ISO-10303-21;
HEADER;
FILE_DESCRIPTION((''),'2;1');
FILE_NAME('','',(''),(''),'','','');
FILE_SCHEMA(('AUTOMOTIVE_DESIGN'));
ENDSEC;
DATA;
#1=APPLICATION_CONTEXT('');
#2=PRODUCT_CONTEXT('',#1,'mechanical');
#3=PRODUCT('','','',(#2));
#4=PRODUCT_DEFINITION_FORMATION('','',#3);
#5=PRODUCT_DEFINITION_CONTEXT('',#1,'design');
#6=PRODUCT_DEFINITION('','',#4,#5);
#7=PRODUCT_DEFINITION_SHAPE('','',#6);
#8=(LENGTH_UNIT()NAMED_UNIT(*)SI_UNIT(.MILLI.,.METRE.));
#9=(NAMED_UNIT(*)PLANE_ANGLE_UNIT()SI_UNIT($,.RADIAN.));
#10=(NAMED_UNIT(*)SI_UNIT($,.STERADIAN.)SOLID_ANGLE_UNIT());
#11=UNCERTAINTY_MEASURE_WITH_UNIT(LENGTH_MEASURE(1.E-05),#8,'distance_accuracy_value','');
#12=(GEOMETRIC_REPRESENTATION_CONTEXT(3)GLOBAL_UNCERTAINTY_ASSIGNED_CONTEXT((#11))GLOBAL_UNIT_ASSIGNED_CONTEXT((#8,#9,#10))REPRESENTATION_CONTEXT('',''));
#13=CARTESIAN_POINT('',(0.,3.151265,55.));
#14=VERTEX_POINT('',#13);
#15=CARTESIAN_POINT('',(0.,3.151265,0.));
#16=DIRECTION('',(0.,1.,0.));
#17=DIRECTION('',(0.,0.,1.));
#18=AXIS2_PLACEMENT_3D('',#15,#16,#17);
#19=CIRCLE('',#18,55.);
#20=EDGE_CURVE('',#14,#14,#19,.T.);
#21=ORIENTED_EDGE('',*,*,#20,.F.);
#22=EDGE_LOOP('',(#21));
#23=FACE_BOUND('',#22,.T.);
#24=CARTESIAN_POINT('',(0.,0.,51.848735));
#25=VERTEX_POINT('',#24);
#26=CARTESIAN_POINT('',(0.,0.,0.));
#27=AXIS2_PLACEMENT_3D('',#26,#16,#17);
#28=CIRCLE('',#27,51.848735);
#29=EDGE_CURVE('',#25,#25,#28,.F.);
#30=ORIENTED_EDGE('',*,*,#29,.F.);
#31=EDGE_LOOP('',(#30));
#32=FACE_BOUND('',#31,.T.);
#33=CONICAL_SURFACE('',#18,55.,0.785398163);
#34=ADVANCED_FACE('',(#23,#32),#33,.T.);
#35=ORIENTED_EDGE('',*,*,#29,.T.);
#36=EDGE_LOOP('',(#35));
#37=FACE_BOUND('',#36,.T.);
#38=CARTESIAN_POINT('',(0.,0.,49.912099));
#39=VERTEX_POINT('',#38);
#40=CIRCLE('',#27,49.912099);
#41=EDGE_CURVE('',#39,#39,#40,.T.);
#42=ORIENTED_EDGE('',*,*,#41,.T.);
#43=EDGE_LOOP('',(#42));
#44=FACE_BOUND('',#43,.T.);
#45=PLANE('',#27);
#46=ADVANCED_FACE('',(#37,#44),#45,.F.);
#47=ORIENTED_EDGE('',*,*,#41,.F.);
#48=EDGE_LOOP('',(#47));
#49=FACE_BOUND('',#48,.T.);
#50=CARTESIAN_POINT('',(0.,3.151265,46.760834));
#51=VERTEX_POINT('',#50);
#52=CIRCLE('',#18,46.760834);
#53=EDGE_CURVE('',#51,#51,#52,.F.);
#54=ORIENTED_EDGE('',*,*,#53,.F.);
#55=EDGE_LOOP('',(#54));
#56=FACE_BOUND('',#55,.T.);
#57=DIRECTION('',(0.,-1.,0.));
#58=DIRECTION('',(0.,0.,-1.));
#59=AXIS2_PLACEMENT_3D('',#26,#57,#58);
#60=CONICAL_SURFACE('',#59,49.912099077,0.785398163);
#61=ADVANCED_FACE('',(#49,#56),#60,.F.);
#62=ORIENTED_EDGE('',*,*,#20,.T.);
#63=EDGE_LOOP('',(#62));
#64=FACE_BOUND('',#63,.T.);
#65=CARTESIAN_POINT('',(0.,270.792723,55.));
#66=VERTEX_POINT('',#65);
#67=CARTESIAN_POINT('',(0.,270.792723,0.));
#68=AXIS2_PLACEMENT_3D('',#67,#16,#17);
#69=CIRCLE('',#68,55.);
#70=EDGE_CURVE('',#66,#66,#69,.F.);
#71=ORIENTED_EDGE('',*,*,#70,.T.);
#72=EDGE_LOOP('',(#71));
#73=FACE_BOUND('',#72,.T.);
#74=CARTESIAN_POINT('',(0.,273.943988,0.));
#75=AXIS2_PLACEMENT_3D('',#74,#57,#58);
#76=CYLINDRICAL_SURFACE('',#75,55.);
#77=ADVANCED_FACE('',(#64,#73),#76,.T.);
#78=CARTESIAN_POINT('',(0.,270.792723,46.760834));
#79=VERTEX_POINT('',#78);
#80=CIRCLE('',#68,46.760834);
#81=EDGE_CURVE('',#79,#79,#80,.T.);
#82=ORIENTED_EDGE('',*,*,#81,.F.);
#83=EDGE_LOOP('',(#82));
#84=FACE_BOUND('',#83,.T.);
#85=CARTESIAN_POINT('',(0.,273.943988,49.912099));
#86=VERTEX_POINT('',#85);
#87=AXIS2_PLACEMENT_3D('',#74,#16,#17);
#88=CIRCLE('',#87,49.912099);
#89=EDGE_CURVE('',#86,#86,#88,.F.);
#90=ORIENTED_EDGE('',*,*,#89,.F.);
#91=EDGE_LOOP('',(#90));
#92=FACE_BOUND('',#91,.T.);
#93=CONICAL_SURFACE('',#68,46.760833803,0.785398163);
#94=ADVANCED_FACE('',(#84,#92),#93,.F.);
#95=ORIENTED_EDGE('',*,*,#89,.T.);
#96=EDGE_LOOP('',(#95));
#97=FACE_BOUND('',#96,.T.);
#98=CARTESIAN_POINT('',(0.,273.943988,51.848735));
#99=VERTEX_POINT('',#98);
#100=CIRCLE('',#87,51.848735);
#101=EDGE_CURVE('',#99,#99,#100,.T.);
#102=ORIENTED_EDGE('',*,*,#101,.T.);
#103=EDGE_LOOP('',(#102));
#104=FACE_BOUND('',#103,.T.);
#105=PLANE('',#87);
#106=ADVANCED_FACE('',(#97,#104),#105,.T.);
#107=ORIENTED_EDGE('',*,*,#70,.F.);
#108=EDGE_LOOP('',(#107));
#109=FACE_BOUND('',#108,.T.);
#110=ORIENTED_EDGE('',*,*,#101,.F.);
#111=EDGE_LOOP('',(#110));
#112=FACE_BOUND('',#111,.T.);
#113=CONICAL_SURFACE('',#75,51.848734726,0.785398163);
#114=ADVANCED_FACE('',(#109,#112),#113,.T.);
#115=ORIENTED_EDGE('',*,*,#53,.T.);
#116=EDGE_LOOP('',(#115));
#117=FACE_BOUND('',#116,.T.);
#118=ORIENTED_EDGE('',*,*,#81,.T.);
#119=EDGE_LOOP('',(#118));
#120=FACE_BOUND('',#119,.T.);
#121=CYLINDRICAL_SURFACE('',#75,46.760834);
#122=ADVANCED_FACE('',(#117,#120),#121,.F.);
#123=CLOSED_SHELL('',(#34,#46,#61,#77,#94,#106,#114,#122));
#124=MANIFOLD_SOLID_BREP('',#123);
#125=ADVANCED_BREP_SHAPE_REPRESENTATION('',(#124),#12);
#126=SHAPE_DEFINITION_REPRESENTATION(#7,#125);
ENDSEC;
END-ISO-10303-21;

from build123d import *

# Parameters (mm, degrees)
SKETCH1_R           = 55
BOSS_EXTRUDE1_DEPTH = 273.943988282
SKETCH2_R           = 46.760833803
CUT_EXTRUDE1_DEPTH  = 285.772380536
CHAMFER1_SIZE       = 3.151265274


with BuildPart() as part:
    # Sketch1 → Boss-Extrude1 (new body)
    with BuildSketch(Plane(origin=(0, 0, 0), x_dir=(1, 0, 0), z_dir=(0, 1, 0))):
        Circle(SKETCH1_R)
    extrude(amount=BOSS_EXTRUDE1_DEPTH)

    # Sketch2 → Cut-Extrude1 (cut, through all)
    with BuildSketch(Plane(origin=(0, 0, 0), x_dir=(1, 0, 0), z_dir=(0, 1, 0))):
        Circle(SKETCH2_R)
    extrude(amount=CUT_EXTRUDE1_DEPTH, mode=Mode.SUBTRACT)

    # Chamfer1
    chamfer1_edges = [part.edges().sort_by_distance(p)[0] for p in [
        (-46.760833803, 273.943988282, 0),
        (-46.760833803, 0, 0),
        (-55, 0, 0),
        (-55, 273.943988282, 0),
    ]]
    chamfer(chamfer1_edges, length=CHAMFER1_SIZE)


solid = part.part
